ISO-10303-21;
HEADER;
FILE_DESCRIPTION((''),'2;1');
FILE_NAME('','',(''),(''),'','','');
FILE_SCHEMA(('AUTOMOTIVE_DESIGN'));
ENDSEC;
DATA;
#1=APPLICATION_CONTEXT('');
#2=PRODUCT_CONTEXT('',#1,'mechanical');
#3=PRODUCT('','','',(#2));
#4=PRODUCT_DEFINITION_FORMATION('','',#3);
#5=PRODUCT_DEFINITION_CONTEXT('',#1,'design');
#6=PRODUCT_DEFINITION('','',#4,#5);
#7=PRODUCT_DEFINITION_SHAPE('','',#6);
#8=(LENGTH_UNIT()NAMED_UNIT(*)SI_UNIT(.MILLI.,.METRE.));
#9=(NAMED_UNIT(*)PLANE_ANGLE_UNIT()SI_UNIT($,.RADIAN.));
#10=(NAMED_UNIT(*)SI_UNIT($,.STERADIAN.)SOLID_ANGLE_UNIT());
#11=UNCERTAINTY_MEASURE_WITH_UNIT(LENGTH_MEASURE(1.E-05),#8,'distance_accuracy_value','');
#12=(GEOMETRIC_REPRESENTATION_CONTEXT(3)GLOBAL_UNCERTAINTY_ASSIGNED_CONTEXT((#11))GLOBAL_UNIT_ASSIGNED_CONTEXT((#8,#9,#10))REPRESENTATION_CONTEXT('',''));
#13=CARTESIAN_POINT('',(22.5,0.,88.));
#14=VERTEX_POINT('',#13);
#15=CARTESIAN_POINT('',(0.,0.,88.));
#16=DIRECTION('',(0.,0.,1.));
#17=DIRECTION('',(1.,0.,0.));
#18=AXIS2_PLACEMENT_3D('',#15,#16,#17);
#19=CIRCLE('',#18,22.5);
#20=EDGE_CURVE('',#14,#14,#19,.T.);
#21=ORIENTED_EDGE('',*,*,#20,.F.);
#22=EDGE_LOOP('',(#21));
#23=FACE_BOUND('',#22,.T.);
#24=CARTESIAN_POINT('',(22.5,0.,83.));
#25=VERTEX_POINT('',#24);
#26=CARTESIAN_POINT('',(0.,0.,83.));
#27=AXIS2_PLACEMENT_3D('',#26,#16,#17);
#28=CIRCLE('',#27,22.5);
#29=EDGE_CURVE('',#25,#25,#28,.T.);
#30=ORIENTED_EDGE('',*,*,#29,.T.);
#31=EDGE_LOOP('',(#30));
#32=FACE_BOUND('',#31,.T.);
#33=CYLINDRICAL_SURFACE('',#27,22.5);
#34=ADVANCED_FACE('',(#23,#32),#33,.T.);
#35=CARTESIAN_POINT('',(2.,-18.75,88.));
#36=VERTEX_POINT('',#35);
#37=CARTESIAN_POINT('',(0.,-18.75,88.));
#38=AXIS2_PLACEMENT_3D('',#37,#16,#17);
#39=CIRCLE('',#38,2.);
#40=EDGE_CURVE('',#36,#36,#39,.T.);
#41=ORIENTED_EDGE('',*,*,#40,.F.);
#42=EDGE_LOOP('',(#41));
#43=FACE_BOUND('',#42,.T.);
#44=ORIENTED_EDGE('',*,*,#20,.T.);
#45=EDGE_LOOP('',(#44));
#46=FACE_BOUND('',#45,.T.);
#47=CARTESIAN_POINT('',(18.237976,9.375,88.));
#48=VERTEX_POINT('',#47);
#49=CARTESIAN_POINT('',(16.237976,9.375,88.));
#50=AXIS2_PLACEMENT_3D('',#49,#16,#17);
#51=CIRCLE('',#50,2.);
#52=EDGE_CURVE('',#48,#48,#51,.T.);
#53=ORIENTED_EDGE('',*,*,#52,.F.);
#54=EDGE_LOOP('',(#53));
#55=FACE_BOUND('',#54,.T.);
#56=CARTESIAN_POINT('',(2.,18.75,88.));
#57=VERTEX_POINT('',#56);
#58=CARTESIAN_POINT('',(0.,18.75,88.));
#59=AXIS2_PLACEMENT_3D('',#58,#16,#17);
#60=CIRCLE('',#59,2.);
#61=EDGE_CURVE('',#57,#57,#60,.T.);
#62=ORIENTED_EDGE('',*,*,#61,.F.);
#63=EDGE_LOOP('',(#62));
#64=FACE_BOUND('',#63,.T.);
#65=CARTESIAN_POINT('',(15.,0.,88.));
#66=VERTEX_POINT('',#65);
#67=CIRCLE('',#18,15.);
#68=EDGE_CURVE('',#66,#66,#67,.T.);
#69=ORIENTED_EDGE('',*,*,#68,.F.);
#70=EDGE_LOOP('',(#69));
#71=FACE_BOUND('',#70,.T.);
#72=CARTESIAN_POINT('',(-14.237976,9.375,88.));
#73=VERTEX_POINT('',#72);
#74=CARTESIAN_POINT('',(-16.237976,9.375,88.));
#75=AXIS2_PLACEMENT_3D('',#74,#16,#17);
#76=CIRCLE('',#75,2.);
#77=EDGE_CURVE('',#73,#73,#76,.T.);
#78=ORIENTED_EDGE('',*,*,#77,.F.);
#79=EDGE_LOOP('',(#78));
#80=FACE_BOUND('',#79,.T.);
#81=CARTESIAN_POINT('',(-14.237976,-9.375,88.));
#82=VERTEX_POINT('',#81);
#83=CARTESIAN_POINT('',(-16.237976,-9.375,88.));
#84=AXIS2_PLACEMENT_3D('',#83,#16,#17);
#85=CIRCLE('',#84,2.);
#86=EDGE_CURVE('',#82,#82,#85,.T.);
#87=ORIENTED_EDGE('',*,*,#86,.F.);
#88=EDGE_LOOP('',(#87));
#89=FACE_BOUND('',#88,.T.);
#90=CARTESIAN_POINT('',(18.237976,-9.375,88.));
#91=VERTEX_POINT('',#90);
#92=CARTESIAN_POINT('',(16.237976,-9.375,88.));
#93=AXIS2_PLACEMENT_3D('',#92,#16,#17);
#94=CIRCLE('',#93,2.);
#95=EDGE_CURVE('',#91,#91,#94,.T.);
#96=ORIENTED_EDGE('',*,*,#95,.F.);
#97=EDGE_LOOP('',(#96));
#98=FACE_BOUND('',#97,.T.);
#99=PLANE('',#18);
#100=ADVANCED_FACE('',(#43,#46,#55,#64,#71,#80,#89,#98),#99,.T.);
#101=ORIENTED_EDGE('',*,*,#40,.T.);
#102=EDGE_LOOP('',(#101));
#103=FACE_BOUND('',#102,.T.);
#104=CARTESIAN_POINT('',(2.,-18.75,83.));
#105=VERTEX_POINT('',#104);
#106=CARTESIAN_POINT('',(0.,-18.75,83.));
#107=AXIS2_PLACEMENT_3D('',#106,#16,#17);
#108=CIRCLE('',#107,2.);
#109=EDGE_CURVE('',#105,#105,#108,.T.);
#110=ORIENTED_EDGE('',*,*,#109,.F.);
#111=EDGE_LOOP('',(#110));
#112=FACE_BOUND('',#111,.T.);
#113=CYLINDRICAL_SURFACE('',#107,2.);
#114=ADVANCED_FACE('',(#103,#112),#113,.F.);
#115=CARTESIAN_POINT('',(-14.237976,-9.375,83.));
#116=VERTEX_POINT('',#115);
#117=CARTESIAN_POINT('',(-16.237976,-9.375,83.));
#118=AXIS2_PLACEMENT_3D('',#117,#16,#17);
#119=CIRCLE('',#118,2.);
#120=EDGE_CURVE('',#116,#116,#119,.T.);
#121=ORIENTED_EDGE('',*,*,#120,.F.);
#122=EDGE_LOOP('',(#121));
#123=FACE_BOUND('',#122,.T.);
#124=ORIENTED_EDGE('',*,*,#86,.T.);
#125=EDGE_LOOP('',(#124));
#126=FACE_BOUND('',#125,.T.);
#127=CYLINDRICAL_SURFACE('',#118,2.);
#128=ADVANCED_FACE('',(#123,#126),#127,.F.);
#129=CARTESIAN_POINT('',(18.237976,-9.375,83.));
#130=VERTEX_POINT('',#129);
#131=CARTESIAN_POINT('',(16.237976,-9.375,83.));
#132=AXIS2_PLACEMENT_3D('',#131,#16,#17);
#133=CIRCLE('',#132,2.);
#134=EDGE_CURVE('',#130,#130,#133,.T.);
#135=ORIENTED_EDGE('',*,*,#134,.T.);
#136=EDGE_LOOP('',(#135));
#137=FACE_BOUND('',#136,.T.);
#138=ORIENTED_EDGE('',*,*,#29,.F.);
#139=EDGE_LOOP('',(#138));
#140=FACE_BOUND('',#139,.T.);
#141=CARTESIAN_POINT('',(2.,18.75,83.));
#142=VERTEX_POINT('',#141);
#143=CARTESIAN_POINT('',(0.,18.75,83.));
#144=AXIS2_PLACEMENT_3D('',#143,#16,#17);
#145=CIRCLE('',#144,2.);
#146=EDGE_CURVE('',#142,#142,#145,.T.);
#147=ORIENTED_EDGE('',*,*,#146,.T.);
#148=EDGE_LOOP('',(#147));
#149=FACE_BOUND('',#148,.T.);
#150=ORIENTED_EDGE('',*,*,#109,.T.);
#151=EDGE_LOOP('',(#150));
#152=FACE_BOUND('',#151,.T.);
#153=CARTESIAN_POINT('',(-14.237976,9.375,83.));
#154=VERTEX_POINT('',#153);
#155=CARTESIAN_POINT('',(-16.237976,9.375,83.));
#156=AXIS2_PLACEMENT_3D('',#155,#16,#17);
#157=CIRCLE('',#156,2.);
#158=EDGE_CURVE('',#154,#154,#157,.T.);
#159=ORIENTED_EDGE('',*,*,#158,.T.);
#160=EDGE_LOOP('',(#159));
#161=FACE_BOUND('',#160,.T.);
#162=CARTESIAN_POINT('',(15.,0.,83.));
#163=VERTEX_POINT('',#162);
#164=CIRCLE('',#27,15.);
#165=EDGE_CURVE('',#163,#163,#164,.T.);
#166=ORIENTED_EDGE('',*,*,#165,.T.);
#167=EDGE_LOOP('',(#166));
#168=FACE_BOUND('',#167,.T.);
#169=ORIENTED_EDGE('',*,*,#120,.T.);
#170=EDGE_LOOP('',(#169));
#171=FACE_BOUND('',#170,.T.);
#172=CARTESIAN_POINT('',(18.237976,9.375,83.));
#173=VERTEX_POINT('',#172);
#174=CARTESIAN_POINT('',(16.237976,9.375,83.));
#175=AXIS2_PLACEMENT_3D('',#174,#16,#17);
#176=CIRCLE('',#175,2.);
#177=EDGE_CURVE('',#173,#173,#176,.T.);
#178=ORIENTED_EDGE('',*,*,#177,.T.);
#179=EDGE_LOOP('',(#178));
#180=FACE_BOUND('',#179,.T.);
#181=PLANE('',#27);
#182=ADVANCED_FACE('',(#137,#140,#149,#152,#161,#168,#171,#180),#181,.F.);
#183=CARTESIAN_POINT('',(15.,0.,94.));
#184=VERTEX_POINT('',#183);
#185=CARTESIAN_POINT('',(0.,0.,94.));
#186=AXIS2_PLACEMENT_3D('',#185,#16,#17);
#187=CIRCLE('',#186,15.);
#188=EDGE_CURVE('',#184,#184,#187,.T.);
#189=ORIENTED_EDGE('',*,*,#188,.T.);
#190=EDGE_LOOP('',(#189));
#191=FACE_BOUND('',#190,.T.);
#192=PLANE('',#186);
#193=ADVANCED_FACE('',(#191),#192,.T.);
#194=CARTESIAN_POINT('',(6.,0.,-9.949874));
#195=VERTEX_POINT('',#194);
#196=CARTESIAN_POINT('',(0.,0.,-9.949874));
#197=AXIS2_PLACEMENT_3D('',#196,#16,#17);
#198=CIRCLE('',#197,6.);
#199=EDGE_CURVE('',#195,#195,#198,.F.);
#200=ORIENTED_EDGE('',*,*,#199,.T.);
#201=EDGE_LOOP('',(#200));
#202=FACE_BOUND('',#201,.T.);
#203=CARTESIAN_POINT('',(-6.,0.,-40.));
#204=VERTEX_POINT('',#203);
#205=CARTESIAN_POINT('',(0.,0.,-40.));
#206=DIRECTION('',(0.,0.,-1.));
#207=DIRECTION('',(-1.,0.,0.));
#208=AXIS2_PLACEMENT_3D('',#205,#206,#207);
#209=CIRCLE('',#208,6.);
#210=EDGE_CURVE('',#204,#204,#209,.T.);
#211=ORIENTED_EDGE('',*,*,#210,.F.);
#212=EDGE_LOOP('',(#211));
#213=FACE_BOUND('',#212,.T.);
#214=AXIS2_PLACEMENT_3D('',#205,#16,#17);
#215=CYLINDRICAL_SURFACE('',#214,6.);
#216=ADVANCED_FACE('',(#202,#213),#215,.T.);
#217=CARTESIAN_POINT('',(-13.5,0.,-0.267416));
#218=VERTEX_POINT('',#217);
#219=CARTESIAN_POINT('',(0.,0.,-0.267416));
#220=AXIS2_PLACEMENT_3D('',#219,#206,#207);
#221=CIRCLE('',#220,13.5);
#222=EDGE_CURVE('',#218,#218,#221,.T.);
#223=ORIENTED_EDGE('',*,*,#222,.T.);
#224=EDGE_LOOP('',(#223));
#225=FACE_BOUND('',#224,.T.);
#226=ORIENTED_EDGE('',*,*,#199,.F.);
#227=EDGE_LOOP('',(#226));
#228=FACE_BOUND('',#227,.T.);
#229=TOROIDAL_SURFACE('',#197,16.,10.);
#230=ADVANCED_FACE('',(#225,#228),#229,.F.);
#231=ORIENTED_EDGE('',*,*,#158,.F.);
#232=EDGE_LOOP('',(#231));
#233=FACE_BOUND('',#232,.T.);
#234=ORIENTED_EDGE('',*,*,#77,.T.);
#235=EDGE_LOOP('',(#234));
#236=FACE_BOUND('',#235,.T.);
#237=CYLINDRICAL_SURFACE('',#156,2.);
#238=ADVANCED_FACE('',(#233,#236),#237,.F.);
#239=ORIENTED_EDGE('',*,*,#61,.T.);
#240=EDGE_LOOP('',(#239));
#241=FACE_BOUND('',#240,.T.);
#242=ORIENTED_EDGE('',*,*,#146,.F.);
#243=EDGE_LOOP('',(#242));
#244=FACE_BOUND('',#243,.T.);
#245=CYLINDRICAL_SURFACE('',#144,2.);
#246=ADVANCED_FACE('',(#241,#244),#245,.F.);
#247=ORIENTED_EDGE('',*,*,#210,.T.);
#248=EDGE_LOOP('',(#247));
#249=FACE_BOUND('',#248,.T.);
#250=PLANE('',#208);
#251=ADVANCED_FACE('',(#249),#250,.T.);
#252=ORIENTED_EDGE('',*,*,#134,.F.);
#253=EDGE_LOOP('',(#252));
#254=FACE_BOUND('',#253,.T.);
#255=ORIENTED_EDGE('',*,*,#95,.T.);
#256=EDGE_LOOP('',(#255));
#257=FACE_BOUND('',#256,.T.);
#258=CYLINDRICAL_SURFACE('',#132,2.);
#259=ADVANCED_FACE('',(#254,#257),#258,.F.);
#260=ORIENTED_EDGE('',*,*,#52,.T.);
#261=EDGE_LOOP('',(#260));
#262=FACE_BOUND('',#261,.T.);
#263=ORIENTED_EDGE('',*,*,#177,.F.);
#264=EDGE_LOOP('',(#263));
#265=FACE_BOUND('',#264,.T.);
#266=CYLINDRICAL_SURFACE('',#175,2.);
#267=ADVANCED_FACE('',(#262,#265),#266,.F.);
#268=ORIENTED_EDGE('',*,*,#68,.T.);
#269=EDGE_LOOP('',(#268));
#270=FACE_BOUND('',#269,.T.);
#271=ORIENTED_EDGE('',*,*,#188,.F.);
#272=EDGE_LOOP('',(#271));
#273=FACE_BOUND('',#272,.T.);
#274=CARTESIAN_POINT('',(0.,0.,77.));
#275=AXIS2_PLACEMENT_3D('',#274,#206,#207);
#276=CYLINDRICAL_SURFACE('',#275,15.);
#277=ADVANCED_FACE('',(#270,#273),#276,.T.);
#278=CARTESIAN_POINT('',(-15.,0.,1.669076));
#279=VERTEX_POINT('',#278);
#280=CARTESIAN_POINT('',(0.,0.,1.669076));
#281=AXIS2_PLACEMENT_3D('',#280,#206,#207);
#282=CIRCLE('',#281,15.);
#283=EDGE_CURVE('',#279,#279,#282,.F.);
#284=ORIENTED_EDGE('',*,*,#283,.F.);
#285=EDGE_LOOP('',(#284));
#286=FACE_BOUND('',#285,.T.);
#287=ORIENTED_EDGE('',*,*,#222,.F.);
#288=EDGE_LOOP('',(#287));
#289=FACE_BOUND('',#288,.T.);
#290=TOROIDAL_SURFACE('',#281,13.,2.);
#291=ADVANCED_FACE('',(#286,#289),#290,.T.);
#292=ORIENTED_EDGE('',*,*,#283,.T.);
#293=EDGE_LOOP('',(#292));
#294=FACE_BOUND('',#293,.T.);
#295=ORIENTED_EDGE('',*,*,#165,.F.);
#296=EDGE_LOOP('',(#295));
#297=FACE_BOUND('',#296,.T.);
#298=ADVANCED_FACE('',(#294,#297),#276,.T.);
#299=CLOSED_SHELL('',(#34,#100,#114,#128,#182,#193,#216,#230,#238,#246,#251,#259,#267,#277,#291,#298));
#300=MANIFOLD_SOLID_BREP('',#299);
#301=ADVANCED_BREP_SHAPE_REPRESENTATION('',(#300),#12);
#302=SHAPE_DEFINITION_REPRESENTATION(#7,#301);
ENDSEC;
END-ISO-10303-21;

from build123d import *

# Parameters (mm, degrees)
SKETCH1_R             = 15
BOSS_EXTRUDE1_DEPTH   = 77
SKETCH3_R             = 15
SKETCH3_R_2           = 7.5
BOSS_EXTRUDE2_DEPTH   = 17
BOSS_EXTRUDE3_START   = -6
SKETCH4_R             = 22.5
SKETCH4_R_2           = 12.5
SKETCH4_R_3           = 2
BOSS_EXTRUDE3_DEPTH   = 5
SKETCH6_R             = 6
SKETCH6_R_2           = 3
BOSS_EXTRUDE4_DEPTH   = 40
CUT_EXTRUDE2_START    = -72
SKETCH9_R             = 7.5
CUT_EXTRUDE2_DEPTH    = 72
CUT_EXTRUDE3_START    = -5
SKETCH10_R            = 3
CUT_EXTRUDE3_DEPTH    = 5
FILLET1_R             = 10
FILLET2_R             = 2
BOSS_EXTRUDE5_START   = -89
SKETCH12_R            = 7.5
BOSS_EXTRUDE5_DEPTH   = 89
DELETEFACE2_START     = -40
DELETEFACE2_OUTLINE_R = 3
DELETEFACE2_DEPTH     = 45


# Read off the part's stored shape, not the designer's step: DeleteFace2
with BuildPart() as part:
    # Sketch1 → Boss-Extrude1 (new body)
    with BuildSketch(Plane.XY):
        Circle(SKETCH1_R)
    extrude(amount=BOSS_EXTRUDE1_DEPTH)

    # Sketch3 → Boss-Extrude2 (add)
    with BuildSketch(Plane.XY.offset(77)):
        Circle(SKETCH3_R)
        Circle(SKETCH3_R_2, mode=Mode.SUBTRACT)
    extrude(amount=BOSS_EXTRUDE2_DEPTH)

    # Sketch4 → Boss-Extrude3 (add)
    with BuildSketch(Plane.XY.offset(94).offset(BOSS_EXTRUDE3_START)):
        Circle(SKETCH4_R)
        Circle(SKETCH4_R_2, mode=Mode.SUBTRACT)
        with Locations((0, 18.75)):
            Circle(SKETCH4_R_3, mode=Mode.SUBTRACT)
        with Locations((16.237976321, 9.375)):
            Circle(SKETCH4_R_3, mode=Mode.SUBTRACT)
        with Locations((16.237976321, -9.375)):
            Circle(SKETCH4_R_3, mode=Mode.SUBTRACT)
        with Locations((0, -18.75)):
            Circle(SKETCH4_R_3, mode=Mode.SUBTRACT)
        with Locations((-16.237976321, -9.375)):
            Circle(SKETCH4_R_3, mode=Mode.SUBTRACT)
        with Locations((-16.237976321, 9.375)):
            Circle(SKETCH4_R_3, mode=Mode.SUBTRACT)
    extrude(amount=-BOSS_EXTRUDE3_DEPTH)

    # Sketch6 → Boss-Extrude4 (add)
    with BuildSketch(Plane(origin=(0, 0, 0), x_dir=(-1, 0, 0), z_dir=(0, 0, -1))):
        with Locations(Location((0, 0, 0), (0, 0, 180))):
            Circle(SKETCH6_R)
        Circle(SKETCH6_R_2, mode=Mode.SUBTRACT)
    extrude(amount=BOSS_EXTRUDE4_DEPTH)

    # Sketch9 → Cut-Extrude2 (cut)
    with BuildSketch(Plane.XY.offset(77).offset(CUT_EXTRUDE2_START)):
        Circle(SKETCH9_R)
    extrude(amount=CUT_EXTRUDE2_DEPTH, mode=Mode.SUBTRACT)

    # Sketch10 → Cut-Extrude3 (cut)
    with BuildSketch(Plane(origin=(0, 0, 0), x_dir=(-1, 0, 0), z_dir=(0, 0, -1)).offset(CUT_EXTRUDE3_START)):
        with Locations(Location((0, 0, 0), (0, 0, 180))):
            Circle(SKETCH10_R)
    extrude(amount=CUT_EXTRUDE3_DEPTH, mode=Mode.SUBTRACT)

    # Fillet1
    # the kernel refuses this fillet: 10 mm, written as the material it adds along each edge
    with BuildSketch(Plane(origin=(0, 0, 0), x_dir=(1, 0, 0), z_dir=(0, 1, 0))) as fillet1_piece_1:
        with BuildLine():
            CenterArc((16, 9.949874371), FILLET1_R, 180, 84.260829523)
            Line((6, 9.949874371), (5.8, 9.949874371))
            Line((5.8, 9.949874371), (5.8, 0))
            Line((5.8, 0), (6, -0.2))
            ThreePointArc((6, -0.2), (10.5, -0.2), (14.98, -0.198997487))
            Line((14.98, -0.198997487), (15, 0))
        make_face()
    revolve(axis=Axis((0, 0, 0), (0, 0, -1)))

    # Fillet2
    fillet2_edges = [part.edges().sort_by_distance(p)[0] for p in [
        (-15, 0, 0),
    ]]
    fillet(fillet2_edges, radius=FILLET2_R)

    # Sketch12 → Boss-Extrude5 (add)
    with BuildSketch(Plane.XY.offset(94).offset(BOSS_EXTRUDE5_START)):
        Circle(SKETCH12_R)
    extrude(amount=BOSS_EXTRUDE5_DEPTH)

    # DeleteFace2 outline → DeleteFace2 (add)
    with BuildSketch(Plane.XY.offset(DELETEFACE2_START)):
        Circle(DELETEFACE2_OUTLINE_R)
    extrude(amount=DELETEFACE2_DEPTH)


solid = part.part
